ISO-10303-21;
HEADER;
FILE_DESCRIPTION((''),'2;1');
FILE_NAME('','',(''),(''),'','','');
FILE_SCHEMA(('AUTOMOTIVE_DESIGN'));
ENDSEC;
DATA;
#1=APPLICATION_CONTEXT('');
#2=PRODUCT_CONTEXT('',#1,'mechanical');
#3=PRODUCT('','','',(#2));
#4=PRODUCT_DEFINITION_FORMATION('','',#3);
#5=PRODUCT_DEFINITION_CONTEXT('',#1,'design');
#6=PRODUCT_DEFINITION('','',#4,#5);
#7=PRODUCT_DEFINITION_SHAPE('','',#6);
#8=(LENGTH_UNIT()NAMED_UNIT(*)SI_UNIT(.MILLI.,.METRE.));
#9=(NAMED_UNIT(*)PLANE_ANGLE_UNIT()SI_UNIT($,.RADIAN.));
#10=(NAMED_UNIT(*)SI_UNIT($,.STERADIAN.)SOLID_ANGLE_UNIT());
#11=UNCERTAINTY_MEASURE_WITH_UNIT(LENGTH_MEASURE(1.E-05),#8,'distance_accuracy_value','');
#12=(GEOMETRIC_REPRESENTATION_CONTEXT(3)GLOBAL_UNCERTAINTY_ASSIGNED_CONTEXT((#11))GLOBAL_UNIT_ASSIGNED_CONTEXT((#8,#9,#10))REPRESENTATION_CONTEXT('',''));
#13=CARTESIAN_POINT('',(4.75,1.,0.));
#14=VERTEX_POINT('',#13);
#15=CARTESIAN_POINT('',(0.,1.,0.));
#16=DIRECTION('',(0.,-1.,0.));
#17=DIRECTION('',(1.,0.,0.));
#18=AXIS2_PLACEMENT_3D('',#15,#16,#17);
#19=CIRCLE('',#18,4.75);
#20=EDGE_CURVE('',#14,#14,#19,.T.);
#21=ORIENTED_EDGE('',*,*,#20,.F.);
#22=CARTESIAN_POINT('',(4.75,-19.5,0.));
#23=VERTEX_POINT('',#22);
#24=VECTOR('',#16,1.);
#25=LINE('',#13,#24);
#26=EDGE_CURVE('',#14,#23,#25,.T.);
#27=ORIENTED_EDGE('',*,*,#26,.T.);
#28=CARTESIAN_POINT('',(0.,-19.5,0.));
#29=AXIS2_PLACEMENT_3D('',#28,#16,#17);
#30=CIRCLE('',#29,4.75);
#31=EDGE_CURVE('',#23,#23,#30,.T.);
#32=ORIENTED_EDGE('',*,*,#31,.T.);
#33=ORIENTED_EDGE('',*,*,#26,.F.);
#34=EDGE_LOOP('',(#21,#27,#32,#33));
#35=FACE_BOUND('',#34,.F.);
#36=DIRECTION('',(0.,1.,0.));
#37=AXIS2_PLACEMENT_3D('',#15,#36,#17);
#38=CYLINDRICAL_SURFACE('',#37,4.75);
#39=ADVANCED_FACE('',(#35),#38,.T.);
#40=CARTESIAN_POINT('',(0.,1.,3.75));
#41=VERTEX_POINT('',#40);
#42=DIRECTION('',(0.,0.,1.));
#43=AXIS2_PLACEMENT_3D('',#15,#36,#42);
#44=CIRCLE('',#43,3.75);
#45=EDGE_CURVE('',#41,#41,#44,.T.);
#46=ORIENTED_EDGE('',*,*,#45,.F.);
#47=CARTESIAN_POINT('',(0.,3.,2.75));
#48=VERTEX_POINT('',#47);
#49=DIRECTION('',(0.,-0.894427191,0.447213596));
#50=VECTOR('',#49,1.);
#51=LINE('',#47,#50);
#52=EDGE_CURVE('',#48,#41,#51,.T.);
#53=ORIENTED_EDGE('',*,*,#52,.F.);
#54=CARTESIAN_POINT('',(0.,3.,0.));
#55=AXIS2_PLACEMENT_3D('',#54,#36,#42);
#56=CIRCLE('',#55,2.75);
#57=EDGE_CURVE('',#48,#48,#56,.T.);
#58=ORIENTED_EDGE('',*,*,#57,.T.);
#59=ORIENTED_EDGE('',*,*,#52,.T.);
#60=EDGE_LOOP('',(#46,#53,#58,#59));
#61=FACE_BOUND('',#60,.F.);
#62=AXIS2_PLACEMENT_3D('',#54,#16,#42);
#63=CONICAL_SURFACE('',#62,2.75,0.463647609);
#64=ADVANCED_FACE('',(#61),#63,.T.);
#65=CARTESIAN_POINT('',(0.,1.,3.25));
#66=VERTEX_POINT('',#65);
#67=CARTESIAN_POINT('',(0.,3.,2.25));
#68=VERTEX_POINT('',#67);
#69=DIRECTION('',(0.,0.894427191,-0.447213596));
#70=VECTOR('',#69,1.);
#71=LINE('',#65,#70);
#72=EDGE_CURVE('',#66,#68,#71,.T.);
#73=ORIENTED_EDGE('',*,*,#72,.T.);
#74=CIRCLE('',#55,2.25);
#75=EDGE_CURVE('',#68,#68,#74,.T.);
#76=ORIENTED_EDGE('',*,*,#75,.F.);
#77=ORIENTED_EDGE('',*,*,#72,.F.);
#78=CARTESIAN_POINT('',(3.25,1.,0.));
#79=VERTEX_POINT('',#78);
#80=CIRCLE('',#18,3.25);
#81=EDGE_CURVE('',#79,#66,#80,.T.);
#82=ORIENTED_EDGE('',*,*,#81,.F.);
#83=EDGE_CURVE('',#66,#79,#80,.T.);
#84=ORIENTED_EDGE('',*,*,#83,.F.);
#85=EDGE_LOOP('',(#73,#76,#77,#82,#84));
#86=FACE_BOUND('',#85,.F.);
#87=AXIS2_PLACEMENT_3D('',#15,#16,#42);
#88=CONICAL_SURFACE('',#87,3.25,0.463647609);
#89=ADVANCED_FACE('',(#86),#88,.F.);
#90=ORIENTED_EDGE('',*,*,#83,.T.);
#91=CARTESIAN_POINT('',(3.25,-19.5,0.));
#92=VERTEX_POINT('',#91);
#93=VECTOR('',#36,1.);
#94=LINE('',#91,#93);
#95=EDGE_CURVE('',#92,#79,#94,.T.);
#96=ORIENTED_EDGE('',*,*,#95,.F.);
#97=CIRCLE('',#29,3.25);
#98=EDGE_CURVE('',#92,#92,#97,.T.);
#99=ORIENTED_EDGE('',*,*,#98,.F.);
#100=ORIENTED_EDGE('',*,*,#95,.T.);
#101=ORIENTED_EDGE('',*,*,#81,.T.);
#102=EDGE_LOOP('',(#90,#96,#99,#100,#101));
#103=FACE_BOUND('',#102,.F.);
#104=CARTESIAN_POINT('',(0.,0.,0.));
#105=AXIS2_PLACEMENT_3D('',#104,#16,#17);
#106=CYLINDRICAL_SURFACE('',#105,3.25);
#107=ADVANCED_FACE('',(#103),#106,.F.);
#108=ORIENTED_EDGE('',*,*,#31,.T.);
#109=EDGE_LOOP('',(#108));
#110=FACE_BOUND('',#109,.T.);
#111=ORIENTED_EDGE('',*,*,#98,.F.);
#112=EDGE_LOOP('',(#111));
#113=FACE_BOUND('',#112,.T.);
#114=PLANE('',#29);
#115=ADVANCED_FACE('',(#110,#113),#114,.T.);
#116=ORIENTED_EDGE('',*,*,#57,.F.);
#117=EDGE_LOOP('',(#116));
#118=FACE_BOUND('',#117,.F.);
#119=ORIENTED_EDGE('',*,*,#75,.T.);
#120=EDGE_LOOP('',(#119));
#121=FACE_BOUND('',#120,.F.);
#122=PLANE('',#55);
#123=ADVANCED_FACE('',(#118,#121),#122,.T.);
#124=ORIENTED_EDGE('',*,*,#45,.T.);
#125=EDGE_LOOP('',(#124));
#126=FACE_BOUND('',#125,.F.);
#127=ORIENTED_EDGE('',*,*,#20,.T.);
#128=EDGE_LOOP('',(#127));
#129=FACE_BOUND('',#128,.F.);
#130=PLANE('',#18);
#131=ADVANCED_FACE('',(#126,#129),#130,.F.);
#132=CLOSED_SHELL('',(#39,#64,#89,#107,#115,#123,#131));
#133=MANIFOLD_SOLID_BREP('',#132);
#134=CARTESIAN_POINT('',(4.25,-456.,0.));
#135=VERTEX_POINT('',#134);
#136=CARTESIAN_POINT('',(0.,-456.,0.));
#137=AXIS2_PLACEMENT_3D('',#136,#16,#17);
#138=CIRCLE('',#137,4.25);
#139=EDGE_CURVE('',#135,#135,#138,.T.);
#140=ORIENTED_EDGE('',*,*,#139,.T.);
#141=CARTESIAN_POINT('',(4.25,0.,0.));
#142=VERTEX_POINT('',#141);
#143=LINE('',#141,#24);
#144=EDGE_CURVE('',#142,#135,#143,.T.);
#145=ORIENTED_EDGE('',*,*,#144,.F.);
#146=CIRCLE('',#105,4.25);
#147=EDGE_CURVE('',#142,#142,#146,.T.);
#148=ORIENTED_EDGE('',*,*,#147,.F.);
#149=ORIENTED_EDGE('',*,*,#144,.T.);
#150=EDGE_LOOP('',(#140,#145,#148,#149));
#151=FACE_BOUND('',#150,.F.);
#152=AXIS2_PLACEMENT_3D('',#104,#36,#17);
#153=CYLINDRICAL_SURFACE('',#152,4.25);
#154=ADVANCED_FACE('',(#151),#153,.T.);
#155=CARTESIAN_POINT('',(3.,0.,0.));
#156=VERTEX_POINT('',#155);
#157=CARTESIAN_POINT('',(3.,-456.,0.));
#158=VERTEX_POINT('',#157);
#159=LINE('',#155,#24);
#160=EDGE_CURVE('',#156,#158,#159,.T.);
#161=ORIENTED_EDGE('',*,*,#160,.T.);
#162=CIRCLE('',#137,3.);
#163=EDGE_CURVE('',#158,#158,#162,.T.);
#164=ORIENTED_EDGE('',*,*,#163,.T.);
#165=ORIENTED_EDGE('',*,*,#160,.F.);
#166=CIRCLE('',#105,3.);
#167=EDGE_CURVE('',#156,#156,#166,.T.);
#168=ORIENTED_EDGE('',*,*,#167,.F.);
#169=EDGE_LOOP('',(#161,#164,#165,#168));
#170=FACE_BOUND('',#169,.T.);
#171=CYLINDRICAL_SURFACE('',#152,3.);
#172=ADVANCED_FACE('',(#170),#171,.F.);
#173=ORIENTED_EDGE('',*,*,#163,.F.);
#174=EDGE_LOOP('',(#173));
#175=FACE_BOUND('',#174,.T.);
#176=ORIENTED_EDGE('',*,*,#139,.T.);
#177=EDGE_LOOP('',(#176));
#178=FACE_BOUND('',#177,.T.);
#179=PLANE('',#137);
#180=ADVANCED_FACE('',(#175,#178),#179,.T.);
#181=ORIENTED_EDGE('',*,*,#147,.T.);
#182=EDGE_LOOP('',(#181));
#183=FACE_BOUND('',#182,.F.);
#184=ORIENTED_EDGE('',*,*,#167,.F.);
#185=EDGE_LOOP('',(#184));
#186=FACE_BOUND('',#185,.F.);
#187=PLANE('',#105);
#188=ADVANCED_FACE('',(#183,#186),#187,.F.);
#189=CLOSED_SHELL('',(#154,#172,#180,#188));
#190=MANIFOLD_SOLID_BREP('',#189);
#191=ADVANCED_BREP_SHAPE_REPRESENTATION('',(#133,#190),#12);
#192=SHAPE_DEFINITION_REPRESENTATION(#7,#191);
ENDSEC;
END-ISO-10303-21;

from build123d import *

# Parameters (mm, degrees)
F0_R     = 4.25
F0_R_2   = 3
F1_DEPTH = 456
F2_R     = 4.75
F2_R_2   = 4.25
F2_R_3   = 3.25
F3_DEPTH = 1
F4_DEPTH = 20.5


with BuildPart() as f1:
    # F0 (on Front) → F1 (new body)
    with BuildSketch(Plane.XZ):
        Circle(F0_R)
        Circle(F0_R_2, mode=Mode.SUBTRACT)
    extrude(amount=F1_DEPTH)


with BuildPart() as f3:
    # F2 (on Front) → F3 (new body)
    with BuildSketch(Plane.XZ):
        Circle(F2_R)
        Circle(F2_R_2, mode=Mode.SUBTRACT)
        Circle(F2_R_2)
        Circle(F2_R_3, mode=Mode.SUBTRACT)
    extrude(amount=-F3_DEPTH)

    # F4 (add): a face of the model
    f4_faces = [f3.faces().sort_by_distance(p)[0] for p in [
        (-4.6156497116, 1, 0),
    ]]
    extrude(f4_faces, amount=-F4_DEPTH)

    # F5 (on Right) → F6 (revolve)
    with BuildSketch(Plane.YZ):
        Polygon((1, 3.25), (3, 2.25), (3, 2.75), (1, 3.75), align=None)
    revolve(axis=Axis((0, 3.2308421517, 0), (0, 1, 0)))


solid = Compound([f1.part, f3.part])
